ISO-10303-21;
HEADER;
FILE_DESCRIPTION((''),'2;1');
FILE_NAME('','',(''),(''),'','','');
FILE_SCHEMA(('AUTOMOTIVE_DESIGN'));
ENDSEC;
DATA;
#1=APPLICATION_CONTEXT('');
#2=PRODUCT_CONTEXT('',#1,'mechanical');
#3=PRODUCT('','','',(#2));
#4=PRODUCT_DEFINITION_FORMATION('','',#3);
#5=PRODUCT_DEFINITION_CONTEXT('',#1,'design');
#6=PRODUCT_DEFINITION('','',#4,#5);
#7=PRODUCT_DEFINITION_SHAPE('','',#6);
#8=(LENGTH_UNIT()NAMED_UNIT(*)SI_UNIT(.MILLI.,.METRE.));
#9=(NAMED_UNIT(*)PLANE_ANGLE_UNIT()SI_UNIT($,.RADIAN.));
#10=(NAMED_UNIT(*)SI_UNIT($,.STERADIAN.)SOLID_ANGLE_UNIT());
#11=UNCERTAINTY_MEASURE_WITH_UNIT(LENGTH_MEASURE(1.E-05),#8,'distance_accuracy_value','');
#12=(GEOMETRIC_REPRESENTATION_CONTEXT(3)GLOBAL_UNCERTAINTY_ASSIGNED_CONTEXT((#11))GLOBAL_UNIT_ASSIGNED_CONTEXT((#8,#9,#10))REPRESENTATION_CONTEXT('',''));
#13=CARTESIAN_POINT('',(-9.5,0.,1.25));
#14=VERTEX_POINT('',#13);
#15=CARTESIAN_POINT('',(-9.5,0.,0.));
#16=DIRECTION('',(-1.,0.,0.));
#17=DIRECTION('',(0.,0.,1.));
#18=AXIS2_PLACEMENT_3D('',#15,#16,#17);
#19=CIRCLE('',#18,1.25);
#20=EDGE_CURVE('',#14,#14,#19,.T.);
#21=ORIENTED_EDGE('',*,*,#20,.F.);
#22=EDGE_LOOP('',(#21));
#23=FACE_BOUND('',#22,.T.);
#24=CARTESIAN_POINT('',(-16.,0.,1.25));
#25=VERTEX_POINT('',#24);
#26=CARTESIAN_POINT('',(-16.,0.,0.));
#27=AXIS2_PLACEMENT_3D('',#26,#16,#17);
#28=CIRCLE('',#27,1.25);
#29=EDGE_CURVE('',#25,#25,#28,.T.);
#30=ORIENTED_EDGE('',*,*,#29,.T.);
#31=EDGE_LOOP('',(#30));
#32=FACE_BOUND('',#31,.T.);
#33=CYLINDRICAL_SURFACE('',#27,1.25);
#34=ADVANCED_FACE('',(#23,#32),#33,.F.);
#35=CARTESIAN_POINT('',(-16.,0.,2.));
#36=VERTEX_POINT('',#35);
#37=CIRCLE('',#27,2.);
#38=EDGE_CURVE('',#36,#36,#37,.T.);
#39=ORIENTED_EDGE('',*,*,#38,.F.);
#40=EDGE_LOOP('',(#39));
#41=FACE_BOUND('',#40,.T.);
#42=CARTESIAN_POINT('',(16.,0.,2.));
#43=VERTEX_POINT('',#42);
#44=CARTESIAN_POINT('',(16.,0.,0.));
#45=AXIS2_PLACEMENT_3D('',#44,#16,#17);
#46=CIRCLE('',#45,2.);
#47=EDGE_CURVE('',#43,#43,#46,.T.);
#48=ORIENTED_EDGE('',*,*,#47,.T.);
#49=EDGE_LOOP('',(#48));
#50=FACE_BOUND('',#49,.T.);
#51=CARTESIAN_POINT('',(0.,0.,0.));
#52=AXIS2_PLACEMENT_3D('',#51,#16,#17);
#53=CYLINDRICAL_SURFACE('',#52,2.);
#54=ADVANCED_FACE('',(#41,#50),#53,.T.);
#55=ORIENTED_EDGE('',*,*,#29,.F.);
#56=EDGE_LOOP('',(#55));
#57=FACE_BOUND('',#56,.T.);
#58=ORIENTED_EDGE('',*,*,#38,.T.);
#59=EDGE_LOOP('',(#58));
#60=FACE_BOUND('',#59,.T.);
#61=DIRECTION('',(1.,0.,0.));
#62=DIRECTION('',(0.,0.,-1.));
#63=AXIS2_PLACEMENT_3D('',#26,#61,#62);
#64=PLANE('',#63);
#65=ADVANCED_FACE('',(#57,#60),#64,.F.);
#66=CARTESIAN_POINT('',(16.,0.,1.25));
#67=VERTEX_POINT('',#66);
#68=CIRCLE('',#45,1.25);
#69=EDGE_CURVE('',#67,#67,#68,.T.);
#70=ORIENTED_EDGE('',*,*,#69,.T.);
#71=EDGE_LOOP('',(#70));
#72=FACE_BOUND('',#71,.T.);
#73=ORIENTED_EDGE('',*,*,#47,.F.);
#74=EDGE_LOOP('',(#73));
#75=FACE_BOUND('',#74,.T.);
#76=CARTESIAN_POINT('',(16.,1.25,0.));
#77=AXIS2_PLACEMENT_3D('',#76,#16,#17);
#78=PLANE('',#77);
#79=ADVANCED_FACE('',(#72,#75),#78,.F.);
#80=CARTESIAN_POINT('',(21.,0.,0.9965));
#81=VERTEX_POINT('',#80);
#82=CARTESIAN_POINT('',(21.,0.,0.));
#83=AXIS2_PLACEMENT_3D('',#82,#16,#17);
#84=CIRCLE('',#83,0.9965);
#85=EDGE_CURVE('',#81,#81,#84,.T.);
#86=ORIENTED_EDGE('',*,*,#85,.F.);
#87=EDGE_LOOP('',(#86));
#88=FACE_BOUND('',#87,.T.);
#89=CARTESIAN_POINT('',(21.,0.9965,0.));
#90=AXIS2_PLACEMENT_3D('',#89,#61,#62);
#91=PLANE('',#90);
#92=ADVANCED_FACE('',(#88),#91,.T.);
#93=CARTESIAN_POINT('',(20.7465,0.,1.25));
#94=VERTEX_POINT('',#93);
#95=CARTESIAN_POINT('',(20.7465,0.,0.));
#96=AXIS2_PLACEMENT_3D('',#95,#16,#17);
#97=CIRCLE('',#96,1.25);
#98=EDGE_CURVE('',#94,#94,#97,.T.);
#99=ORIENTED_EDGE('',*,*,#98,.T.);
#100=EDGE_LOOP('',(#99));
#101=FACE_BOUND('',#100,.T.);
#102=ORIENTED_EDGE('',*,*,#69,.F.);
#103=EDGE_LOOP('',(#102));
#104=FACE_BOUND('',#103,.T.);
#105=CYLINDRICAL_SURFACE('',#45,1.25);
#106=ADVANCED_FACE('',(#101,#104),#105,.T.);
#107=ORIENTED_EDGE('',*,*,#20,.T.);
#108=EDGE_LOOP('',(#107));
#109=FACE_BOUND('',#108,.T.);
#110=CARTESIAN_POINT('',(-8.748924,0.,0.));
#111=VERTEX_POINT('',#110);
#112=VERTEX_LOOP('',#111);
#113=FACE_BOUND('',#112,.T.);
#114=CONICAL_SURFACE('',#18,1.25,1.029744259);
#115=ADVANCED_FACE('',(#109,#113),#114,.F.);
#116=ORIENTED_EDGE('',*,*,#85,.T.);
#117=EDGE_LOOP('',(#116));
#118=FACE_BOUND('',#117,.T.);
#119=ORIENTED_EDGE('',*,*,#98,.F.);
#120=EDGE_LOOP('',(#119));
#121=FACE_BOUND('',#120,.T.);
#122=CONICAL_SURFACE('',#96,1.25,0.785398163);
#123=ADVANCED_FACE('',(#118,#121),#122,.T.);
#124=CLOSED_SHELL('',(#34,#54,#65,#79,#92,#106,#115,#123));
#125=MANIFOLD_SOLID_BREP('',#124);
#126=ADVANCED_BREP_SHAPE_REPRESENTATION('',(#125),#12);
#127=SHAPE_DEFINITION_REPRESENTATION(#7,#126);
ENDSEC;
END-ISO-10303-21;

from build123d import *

# Parameters (mm, degrees)
M3_GEWINDEBOHRUNG1_D     = 2.5
M3_GEWINDEBOHRUNG1_DEPTH = 6.5
M3_GEWINDEBOHRUNG1_TIP   = 0.751075774
FASE1_SIZE               = 0.2
SKETCH2_R                = 1.25
CUT_EXTRUDE1_DEPTH       = 3


# Read off the part's stored shape, not the designer's step: M2.5 Machine Threads Stud1
with BuildPart() as part:
    # Skizze1 → Rotation1 (revolve)
    with BuildSketch(Plane.XY, mode=Mode.PRIVATE) as rotation1_sk:
        Polygon((19, 0), (-16, 0), (-16, 2), (16, 2), (16, 1.25), (19, 1.25), align=None)
    revolve(rotation1_sk.sketch.rotate(Axis((0, 0, 0), (1, 0, 0)), 90), axis=Axis((0, 0, 0), (1, 0, 0)))

    # M3 Gewindebohrung1
    with Locations(Plane.ZY.offset(16)):
        with Locations((0, 0)):
            Hole(M3_GEWINDEBOHRUNG1_D / 2, depth=M3_GEWINDEBOHRUNG1_DEPTH)
            with Locations((0, 0, -(M3_GEWINDEBOHRUNG1_DEPTH + M3_GEWINDEBOHRUNG1_TIP / 2))):  # 118° drill point
                Cone(0, M3_GEWINDEBOHRUNG1_D / 2, M3_GEWINDEBOHRUNG1_TIP, mode=Mode.SUBTRACT)

    # Fase1
    fase1_edges = [part.edges().sort_by_distance(p)[0] for p in [
        (19, 0, -1.25),
    ]]
    chamfer(fase1_edges, length=FASE1_SIZE)

    # Sketch2 → Cut-Extrude1 (cut)
    with BuildSketch(Plane(origin=(19, 0, 0), x_dir=(0, 0, -1), z_dir=(1, 0, 0))):
        with Locations(Location((0, 0, 0), (0, 0, 180))):
            Circle(SKETCH2_R)
    extrude(amount=-CUT_EXTRUDE1_DEPTH, mode=Mode.SUBTRACT)

    # M2.5 Machine Threads Stud1 outline → M2.5 Machine Threads Stud1 (revolve)
    with BuildSketch(Plane.YX):
        Polygon((0.9965, 21), (0, 21), (0, 16), (1.25, 16), (1.25, 20.7465), align=None)
    revolve(axis=Axis((0, 0, 0), (1, 0, 0)))


solid = part.part
